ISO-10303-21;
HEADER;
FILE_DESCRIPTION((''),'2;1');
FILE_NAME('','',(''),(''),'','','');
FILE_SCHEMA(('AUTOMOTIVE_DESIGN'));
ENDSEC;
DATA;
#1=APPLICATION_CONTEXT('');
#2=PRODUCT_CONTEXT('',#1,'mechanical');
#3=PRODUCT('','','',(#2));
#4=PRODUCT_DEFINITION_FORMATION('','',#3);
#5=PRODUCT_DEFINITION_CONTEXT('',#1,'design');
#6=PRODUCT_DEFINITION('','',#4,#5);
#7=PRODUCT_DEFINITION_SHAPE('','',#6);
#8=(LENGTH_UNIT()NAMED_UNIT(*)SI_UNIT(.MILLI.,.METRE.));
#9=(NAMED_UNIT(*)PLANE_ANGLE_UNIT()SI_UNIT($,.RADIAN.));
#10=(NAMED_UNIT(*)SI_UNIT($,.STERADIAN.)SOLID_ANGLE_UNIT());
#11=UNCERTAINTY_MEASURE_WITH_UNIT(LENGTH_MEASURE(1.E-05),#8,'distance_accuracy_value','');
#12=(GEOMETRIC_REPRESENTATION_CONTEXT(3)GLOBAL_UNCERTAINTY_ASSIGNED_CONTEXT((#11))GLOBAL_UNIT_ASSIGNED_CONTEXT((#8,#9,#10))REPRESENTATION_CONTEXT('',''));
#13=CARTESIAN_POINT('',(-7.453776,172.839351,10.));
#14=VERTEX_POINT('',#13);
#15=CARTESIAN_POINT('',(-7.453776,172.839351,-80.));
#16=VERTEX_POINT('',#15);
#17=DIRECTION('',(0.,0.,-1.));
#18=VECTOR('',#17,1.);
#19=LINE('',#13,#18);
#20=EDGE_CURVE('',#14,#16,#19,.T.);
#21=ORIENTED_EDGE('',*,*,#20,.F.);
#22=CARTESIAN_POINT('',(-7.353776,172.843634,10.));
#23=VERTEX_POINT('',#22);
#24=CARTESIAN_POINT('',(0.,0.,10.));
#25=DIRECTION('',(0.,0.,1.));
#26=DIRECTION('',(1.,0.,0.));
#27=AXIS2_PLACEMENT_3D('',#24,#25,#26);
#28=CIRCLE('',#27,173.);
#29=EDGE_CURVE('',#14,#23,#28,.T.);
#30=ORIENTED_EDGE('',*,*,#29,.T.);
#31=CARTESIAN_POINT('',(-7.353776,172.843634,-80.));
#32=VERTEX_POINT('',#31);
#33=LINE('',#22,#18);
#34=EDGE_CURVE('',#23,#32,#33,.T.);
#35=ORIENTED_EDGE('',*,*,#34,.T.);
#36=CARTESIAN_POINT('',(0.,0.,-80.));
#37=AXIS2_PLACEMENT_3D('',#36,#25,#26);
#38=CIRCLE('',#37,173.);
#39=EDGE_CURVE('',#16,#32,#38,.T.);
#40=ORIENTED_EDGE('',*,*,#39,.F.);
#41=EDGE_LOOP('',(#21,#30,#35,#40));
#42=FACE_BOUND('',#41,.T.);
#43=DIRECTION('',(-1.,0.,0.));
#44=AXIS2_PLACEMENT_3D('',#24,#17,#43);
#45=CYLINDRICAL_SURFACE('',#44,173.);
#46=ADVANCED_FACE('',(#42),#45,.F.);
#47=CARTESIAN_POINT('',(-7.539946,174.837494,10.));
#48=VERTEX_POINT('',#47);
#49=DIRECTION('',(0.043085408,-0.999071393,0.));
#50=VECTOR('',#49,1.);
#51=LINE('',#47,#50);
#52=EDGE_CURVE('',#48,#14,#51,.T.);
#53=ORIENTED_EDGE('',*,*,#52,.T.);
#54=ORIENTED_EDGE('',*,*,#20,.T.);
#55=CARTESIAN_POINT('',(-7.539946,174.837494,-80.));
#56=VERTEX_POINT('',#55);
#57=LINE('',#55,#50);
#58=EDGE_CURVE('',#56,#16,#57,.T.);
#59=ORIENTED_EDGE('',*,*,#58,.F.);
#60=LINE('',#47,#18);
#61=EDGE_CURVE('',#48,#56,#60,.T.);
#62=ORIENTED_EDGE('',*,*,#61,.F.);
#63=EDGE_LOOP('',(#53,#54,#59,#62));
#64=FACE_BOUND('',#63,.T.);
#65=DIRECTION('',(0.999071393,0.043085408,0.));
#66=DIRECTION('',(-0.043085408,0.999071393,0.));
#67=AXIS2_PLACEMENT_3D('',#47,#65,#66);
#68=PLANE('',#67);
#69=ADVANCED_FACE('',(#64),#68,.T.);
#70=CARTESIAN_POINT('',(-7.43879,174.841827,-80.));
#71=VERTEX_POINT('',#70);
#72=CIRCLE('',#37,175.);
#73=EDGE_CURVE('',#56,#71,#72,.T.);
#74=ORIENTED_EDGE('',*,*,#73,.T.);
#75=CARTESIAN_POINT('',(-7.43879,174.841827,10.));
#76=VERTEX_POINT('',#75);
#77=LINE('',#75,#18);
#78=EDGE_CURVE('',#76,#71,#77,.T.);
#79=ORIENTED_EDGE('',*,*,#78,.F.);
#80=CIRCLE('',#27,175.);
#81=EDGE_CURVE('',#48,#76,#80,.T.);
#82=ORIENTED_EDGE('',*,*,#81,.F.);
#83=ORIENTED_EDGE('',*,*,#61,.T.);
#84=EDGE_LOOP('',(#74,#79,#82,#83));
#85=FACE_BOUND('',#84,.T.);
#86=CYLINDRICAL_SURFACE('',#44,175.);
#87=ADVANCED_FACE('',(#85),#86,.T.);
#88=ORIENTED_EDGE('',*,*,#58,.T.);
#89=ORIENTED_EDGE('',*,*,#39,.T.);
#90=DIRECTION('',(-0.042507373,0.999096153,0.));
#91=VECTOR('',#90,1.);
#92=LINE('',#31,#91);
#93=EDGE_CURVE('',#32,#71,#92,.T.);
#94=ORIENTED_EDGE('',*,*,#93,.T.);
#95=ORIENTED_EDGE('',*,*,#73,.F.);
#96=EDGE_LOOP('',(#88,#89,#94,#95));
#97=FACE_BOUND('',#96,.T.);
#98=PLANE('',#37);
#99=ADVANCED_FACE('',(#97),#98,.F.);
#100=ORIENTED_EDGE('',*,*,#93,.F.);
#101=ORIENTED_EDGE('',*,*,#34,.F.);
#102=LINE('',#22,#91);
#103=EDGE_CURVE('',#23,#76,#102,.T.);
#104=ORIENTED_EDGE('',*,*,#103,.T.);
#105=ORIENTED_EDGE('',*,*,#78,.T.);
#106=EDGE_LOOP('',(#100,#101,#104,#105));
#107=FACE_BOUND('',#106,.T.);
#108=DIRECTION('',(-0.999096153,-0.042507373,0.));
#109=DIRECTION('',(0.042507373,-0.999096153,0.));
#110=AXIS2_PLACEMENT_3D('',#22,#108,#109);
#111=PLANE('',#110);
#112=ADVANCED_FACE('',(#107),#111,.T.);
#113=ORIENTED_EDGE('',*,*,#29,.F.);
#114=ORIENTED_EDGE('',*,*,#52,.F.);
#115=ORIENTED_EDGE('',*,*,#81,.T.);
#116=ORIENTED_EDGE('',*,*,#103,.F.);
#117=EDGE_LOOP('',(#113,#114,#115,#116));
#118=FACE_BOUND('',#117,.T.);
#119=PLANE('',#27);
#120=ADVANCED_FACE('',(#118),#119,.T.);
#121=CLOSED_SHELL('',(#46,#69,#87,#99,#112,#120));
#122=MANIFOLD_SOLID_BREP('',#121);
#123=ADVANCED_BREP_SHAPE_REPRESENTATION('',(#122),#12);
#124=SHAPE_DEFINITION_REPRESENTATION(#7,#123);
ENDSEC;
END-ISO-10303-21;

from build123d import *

# Parameters (mm, degrees)
BASE_FLANGE1_DEPTH      = 10
BASE_FLANGE1_DEPTH_BACK = 80


# Sheet-metal steps are written as plain solids
with BuildPart() as part:
    # Sketch1 → Base-Flange1 (new, two sides: drawn at the far end of the back side and taken through both)
    with BuildSketch(Plane.XY.offset(-BASE_FLANGE1_DEPTH_BACK)):
        with BuildLine():
            ThreePointArc((-7.453775566, 172.83935093), (7.403775876, -172.841499944), (-7.353775566, 172.843634493))
            Line((-7.353775566, 172.843634493), (-7.438790313, 174.8418268))
            ThreePointArc((-7.438790313, 174.8418268), (7.489368661, -174.839667573), (-7.539946382, 174.837493715))
            Line((-7.539946382, 174.837493715), (-7.453775566, 172.83935093))
        make_face()
    extrude(amount=BASE_FLANGE1_DEPTH + BASE_FLANGE1_DEPTH_BACK)


solid = part.part
